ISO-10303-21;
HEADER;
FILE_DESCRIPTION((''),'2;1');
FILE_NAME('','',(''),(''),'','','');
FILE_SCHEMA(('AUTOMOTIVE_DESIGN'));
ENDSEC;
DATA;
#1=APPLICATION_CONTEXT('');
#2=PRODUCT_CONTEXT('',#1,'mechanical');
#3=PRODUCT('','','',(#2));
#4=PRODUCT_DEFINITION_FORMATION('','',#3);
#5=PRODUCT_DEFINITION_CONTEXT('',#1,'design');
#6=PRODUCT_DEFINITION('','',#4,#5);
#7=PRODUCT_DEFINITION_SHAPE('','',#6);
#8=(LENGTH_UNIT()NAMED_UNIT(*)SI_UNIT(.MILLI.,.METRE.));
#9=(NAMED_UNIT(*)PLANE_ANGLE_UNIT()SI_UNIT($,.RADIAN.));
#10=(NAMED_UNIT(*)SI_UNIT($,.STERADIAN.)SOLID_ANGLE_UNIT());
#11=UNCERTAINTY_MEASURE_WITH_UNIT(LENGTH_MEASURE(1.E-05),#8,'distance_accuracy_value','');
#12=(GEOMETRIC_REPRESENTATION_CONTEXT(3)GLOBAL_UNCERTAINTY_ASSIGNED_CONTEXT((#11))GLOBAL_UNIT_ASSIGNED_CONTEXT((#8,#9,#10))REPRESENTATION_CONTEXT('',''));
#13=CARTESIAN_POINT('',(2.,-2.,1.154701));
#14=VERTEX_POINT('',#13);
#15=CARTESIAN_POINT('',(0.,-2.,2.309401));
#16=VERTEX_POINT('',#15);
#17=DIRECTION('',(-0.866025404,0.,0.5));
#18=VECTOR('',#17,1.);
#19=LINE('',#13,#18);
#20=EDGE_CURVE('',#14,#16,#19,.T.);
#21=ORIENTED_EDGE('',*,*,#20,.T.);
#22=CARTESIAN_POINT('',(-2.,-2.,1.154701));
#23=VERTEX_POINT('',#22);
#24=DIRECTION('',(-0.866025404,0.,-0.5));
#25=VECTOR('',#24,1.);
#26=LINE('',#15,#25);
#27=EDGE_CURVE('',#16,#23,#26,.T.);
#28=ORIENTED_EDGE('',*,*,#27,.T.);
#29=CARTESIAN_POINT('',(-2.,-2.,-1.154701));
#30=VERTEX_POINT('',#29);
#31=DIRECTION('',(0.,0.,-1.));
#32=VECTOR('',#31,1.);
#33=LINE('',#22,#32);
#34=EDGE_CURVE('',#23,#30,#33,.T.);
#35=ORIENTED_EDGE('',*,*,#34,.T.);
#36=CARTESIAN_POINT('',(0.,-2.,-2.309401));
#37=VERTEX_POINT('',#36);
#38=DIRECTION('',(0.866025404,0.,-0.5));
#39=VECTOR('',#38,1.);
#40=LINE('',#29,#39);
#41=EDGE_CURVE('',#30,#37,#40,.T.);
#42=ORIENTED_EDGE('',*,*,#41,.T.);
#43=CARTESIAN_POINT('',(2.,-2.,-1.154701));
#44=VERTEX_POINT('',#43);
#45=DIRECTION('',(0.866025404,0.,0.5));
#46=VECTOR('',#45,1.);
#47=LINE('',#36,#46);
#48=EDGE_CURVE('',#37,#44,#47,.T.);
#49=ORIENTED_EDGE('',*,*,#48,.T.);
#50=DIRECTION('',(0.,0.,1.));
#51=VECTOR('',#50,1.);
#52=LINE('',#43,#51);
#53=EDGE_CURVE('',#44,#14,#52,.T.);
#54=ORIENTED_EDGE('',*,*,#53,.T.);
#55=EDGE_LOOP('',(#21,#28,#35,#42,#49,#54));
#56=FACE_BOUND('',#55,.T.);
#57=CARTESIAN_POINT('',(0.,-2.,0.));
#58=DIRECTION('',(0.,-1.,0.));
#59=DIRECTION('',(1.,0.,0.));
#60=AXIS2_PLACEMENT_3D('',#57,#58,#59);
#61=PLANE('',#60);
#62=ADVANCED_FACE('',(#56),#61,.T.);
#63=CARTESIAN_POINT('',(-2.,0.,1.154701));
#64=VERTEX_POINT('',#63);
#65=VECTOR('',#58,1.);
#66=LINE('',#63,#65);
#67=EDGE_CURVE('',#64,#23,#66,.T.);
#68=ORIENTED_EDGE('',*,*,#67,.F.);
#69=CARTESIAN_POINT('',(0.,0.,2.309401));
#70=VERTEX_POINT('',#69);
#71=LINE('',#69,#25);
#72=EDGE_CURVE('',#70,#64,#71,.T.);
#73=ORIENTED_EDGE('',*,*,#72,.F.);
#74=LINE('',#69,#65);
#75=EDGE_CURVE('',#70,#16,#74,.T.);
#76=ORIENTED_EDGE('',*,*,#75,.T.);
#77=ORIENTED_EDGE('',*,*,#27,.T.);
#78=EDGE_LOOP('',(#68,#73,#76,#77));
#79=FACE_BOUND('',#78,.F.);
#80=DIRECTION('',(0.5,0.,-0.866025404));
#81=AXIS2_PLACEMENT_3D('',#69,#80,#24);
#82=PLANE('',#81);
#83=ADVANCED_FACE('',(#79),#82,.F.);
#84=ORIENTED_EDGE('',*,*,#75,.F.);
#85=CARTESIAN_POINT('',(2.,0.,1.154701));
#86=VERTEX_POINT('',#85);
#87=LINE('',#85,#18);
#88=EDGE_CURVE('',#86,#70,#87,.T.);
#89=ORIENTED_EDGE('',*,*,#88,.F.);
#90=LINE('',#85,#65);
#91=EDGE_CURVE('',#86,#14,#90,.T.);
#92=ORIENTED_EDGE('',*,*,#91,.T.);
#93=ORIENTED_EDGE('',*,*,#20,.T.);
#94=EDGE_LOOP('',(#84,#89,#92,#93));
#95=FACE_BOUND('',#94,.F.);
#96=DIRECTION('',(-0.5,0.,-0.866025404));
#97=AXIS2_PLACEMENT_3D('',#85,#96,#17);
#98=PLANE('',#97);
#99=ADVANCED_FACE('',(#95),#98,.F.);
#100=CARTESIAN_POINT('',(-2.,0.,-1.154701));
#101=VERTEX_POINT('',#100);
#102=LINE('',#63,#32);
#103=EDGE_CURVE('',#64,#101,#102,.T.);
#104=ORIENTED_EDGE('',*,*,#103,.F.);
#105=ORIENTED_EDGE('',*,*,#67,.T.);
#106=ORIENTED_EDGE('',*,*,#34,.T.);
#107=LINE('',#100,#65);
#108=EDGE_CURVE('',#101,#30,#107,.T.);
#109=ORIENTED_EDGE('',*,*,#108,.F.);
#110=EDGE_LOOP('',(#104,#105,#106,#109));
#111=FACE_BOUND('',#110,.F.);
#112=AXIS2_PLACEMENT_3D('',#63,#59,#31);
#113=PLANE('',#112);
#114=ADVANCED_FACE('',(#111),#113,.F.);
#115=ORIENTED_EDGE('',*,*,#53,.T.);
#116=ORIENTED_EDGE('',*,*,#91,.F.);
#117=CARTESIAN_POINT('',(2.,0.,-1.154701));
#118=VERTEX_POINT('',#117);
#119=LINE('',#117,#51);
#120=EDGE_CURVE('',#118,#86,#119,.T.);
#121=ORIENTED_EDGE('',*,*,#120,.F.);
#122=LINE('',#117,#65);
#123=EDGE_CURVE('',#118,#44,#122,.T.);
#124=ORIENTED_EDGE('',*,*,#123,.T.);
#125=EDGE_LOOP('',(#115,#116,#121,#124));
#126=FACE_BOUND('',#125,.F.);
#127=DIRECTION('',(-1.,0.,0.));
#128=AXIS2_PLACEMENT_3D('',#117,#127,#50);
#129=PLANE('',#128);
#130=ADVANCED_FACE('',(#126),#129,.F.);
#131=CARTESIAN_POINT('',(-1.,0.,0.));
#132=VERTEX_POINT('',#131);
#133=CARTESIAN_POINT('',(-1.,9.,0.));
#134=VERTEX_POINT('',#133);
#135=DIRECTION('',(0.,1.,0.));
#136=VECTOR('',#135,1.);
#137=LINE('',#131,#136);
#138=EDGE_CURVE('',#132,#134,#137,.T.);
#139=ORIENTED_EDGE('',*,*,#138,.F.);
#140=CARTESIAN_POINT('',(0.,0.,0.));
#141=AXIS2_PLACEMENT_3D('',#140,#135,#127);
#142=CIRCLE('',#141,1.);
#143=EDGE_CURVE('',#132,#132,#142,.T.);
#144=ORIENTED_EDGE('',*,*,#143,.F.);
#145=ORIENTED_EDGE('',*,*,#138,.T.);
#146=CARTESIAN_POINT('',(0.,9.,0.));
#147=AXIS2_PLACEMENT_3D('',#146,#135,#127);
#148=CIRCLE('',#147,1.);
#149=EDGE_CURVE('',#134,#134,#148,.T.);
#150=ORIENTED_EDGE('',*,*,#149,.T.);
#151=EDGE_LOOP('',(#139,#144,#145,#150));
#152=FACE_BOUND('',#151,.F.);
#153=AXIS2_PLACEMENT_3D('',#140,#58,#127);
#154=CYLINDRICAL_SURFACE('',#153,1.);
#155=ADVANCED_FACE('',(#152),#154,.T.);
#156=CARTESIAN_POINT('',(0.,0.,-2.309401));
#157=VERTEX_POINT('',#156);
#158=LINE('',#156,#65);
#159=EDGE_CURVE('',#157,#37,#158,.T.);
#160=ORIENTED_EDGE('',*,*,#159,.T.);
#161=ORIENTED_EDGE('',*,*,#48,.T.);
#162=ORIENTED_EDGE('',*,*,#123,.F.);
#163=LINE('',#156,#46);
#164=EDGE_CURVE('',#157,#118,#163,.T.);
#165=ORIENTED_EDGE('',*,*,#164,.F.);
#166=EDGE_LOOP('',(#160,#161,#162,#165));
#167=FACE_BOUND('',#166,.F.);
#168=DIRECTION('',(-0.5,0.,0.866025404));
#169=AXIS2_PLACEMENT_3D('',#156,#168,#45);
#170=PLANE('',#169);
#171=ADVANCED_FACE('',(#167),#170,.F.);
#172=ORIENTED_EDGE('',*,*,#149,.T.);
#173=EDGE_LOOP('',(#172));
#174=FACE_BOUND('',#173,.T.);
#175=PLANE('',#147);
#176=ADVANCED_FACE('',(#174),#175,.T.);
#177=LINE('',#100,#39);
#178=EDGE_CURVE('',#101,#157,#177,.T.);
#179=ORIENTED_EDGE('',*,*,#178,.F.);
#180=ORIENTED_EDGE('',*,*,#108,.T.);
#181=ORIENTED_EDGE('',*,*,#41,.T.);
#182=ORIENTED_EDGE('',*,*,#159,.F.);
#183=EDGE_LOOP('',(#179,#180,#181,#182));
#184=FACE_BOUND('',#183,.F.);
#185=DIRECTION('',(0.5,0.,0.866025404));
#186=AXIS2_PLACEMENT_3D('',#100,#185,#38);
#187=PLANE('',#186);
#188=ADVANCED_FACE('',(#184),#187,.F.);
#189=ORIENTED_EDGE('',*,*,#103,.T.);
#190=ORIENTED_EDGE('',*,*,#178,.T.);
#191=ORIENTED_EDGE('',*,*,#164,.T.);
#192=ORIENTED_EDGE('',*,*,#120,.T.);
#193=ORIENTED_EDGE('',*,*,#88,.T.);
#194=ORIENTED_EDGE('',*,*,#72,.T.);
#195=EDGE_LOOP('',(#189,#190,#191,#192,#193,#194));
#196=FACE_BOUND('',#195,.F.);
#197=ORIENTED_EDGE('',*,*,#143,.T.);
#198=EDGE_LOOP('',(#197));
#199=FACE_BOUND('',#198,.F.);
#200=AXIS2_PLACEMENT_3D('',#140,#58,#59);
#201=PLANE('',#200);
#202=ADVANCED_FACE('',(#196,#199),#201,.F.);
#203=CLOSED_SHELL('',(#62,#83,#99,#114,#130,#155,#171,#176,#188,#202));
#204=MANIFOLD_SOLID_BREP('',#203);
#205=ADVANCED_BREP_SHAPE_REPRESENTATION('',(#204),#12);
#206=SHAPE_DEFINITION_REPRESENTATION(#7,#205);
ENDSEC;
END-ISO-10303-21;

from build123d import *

# Parameters (mm, degrees)
F0_R     = 1
F1_DEPTH = 2
F2_R     = 1
F3_DEPTH = 9


# Not quite as in the source:
# - a feature of the source that left no trace in its solid (it failed there, or was rolled back) is left out


with BuildPart() as f1:
    # F0 (on Front) → F1 (new body)
    with BuildSketch(Plane.XZ):
        Polygon((-2, 1.1547005384), (-2, -1.1547005384), (0, -2.3094010768), (2, -1.1547005384), (2, 1.1547005384), (0, 2.3094010768), align=None)
        Circle(F0_R, mode=Mode.SUBTRACT)
        Circle(F0_R)
    extrude(amount=F1_DEPTH)

    # F2 (on face) → F3 (join)
    with BuildSketch(Plane(origin=(0, 0, 0), x_dir=(-1, 0, 0), z_dir=(0, 1, 0))):
        Circle(F2_R)
    extrude(amount=F3_DEPTH)


solid = f1.part
